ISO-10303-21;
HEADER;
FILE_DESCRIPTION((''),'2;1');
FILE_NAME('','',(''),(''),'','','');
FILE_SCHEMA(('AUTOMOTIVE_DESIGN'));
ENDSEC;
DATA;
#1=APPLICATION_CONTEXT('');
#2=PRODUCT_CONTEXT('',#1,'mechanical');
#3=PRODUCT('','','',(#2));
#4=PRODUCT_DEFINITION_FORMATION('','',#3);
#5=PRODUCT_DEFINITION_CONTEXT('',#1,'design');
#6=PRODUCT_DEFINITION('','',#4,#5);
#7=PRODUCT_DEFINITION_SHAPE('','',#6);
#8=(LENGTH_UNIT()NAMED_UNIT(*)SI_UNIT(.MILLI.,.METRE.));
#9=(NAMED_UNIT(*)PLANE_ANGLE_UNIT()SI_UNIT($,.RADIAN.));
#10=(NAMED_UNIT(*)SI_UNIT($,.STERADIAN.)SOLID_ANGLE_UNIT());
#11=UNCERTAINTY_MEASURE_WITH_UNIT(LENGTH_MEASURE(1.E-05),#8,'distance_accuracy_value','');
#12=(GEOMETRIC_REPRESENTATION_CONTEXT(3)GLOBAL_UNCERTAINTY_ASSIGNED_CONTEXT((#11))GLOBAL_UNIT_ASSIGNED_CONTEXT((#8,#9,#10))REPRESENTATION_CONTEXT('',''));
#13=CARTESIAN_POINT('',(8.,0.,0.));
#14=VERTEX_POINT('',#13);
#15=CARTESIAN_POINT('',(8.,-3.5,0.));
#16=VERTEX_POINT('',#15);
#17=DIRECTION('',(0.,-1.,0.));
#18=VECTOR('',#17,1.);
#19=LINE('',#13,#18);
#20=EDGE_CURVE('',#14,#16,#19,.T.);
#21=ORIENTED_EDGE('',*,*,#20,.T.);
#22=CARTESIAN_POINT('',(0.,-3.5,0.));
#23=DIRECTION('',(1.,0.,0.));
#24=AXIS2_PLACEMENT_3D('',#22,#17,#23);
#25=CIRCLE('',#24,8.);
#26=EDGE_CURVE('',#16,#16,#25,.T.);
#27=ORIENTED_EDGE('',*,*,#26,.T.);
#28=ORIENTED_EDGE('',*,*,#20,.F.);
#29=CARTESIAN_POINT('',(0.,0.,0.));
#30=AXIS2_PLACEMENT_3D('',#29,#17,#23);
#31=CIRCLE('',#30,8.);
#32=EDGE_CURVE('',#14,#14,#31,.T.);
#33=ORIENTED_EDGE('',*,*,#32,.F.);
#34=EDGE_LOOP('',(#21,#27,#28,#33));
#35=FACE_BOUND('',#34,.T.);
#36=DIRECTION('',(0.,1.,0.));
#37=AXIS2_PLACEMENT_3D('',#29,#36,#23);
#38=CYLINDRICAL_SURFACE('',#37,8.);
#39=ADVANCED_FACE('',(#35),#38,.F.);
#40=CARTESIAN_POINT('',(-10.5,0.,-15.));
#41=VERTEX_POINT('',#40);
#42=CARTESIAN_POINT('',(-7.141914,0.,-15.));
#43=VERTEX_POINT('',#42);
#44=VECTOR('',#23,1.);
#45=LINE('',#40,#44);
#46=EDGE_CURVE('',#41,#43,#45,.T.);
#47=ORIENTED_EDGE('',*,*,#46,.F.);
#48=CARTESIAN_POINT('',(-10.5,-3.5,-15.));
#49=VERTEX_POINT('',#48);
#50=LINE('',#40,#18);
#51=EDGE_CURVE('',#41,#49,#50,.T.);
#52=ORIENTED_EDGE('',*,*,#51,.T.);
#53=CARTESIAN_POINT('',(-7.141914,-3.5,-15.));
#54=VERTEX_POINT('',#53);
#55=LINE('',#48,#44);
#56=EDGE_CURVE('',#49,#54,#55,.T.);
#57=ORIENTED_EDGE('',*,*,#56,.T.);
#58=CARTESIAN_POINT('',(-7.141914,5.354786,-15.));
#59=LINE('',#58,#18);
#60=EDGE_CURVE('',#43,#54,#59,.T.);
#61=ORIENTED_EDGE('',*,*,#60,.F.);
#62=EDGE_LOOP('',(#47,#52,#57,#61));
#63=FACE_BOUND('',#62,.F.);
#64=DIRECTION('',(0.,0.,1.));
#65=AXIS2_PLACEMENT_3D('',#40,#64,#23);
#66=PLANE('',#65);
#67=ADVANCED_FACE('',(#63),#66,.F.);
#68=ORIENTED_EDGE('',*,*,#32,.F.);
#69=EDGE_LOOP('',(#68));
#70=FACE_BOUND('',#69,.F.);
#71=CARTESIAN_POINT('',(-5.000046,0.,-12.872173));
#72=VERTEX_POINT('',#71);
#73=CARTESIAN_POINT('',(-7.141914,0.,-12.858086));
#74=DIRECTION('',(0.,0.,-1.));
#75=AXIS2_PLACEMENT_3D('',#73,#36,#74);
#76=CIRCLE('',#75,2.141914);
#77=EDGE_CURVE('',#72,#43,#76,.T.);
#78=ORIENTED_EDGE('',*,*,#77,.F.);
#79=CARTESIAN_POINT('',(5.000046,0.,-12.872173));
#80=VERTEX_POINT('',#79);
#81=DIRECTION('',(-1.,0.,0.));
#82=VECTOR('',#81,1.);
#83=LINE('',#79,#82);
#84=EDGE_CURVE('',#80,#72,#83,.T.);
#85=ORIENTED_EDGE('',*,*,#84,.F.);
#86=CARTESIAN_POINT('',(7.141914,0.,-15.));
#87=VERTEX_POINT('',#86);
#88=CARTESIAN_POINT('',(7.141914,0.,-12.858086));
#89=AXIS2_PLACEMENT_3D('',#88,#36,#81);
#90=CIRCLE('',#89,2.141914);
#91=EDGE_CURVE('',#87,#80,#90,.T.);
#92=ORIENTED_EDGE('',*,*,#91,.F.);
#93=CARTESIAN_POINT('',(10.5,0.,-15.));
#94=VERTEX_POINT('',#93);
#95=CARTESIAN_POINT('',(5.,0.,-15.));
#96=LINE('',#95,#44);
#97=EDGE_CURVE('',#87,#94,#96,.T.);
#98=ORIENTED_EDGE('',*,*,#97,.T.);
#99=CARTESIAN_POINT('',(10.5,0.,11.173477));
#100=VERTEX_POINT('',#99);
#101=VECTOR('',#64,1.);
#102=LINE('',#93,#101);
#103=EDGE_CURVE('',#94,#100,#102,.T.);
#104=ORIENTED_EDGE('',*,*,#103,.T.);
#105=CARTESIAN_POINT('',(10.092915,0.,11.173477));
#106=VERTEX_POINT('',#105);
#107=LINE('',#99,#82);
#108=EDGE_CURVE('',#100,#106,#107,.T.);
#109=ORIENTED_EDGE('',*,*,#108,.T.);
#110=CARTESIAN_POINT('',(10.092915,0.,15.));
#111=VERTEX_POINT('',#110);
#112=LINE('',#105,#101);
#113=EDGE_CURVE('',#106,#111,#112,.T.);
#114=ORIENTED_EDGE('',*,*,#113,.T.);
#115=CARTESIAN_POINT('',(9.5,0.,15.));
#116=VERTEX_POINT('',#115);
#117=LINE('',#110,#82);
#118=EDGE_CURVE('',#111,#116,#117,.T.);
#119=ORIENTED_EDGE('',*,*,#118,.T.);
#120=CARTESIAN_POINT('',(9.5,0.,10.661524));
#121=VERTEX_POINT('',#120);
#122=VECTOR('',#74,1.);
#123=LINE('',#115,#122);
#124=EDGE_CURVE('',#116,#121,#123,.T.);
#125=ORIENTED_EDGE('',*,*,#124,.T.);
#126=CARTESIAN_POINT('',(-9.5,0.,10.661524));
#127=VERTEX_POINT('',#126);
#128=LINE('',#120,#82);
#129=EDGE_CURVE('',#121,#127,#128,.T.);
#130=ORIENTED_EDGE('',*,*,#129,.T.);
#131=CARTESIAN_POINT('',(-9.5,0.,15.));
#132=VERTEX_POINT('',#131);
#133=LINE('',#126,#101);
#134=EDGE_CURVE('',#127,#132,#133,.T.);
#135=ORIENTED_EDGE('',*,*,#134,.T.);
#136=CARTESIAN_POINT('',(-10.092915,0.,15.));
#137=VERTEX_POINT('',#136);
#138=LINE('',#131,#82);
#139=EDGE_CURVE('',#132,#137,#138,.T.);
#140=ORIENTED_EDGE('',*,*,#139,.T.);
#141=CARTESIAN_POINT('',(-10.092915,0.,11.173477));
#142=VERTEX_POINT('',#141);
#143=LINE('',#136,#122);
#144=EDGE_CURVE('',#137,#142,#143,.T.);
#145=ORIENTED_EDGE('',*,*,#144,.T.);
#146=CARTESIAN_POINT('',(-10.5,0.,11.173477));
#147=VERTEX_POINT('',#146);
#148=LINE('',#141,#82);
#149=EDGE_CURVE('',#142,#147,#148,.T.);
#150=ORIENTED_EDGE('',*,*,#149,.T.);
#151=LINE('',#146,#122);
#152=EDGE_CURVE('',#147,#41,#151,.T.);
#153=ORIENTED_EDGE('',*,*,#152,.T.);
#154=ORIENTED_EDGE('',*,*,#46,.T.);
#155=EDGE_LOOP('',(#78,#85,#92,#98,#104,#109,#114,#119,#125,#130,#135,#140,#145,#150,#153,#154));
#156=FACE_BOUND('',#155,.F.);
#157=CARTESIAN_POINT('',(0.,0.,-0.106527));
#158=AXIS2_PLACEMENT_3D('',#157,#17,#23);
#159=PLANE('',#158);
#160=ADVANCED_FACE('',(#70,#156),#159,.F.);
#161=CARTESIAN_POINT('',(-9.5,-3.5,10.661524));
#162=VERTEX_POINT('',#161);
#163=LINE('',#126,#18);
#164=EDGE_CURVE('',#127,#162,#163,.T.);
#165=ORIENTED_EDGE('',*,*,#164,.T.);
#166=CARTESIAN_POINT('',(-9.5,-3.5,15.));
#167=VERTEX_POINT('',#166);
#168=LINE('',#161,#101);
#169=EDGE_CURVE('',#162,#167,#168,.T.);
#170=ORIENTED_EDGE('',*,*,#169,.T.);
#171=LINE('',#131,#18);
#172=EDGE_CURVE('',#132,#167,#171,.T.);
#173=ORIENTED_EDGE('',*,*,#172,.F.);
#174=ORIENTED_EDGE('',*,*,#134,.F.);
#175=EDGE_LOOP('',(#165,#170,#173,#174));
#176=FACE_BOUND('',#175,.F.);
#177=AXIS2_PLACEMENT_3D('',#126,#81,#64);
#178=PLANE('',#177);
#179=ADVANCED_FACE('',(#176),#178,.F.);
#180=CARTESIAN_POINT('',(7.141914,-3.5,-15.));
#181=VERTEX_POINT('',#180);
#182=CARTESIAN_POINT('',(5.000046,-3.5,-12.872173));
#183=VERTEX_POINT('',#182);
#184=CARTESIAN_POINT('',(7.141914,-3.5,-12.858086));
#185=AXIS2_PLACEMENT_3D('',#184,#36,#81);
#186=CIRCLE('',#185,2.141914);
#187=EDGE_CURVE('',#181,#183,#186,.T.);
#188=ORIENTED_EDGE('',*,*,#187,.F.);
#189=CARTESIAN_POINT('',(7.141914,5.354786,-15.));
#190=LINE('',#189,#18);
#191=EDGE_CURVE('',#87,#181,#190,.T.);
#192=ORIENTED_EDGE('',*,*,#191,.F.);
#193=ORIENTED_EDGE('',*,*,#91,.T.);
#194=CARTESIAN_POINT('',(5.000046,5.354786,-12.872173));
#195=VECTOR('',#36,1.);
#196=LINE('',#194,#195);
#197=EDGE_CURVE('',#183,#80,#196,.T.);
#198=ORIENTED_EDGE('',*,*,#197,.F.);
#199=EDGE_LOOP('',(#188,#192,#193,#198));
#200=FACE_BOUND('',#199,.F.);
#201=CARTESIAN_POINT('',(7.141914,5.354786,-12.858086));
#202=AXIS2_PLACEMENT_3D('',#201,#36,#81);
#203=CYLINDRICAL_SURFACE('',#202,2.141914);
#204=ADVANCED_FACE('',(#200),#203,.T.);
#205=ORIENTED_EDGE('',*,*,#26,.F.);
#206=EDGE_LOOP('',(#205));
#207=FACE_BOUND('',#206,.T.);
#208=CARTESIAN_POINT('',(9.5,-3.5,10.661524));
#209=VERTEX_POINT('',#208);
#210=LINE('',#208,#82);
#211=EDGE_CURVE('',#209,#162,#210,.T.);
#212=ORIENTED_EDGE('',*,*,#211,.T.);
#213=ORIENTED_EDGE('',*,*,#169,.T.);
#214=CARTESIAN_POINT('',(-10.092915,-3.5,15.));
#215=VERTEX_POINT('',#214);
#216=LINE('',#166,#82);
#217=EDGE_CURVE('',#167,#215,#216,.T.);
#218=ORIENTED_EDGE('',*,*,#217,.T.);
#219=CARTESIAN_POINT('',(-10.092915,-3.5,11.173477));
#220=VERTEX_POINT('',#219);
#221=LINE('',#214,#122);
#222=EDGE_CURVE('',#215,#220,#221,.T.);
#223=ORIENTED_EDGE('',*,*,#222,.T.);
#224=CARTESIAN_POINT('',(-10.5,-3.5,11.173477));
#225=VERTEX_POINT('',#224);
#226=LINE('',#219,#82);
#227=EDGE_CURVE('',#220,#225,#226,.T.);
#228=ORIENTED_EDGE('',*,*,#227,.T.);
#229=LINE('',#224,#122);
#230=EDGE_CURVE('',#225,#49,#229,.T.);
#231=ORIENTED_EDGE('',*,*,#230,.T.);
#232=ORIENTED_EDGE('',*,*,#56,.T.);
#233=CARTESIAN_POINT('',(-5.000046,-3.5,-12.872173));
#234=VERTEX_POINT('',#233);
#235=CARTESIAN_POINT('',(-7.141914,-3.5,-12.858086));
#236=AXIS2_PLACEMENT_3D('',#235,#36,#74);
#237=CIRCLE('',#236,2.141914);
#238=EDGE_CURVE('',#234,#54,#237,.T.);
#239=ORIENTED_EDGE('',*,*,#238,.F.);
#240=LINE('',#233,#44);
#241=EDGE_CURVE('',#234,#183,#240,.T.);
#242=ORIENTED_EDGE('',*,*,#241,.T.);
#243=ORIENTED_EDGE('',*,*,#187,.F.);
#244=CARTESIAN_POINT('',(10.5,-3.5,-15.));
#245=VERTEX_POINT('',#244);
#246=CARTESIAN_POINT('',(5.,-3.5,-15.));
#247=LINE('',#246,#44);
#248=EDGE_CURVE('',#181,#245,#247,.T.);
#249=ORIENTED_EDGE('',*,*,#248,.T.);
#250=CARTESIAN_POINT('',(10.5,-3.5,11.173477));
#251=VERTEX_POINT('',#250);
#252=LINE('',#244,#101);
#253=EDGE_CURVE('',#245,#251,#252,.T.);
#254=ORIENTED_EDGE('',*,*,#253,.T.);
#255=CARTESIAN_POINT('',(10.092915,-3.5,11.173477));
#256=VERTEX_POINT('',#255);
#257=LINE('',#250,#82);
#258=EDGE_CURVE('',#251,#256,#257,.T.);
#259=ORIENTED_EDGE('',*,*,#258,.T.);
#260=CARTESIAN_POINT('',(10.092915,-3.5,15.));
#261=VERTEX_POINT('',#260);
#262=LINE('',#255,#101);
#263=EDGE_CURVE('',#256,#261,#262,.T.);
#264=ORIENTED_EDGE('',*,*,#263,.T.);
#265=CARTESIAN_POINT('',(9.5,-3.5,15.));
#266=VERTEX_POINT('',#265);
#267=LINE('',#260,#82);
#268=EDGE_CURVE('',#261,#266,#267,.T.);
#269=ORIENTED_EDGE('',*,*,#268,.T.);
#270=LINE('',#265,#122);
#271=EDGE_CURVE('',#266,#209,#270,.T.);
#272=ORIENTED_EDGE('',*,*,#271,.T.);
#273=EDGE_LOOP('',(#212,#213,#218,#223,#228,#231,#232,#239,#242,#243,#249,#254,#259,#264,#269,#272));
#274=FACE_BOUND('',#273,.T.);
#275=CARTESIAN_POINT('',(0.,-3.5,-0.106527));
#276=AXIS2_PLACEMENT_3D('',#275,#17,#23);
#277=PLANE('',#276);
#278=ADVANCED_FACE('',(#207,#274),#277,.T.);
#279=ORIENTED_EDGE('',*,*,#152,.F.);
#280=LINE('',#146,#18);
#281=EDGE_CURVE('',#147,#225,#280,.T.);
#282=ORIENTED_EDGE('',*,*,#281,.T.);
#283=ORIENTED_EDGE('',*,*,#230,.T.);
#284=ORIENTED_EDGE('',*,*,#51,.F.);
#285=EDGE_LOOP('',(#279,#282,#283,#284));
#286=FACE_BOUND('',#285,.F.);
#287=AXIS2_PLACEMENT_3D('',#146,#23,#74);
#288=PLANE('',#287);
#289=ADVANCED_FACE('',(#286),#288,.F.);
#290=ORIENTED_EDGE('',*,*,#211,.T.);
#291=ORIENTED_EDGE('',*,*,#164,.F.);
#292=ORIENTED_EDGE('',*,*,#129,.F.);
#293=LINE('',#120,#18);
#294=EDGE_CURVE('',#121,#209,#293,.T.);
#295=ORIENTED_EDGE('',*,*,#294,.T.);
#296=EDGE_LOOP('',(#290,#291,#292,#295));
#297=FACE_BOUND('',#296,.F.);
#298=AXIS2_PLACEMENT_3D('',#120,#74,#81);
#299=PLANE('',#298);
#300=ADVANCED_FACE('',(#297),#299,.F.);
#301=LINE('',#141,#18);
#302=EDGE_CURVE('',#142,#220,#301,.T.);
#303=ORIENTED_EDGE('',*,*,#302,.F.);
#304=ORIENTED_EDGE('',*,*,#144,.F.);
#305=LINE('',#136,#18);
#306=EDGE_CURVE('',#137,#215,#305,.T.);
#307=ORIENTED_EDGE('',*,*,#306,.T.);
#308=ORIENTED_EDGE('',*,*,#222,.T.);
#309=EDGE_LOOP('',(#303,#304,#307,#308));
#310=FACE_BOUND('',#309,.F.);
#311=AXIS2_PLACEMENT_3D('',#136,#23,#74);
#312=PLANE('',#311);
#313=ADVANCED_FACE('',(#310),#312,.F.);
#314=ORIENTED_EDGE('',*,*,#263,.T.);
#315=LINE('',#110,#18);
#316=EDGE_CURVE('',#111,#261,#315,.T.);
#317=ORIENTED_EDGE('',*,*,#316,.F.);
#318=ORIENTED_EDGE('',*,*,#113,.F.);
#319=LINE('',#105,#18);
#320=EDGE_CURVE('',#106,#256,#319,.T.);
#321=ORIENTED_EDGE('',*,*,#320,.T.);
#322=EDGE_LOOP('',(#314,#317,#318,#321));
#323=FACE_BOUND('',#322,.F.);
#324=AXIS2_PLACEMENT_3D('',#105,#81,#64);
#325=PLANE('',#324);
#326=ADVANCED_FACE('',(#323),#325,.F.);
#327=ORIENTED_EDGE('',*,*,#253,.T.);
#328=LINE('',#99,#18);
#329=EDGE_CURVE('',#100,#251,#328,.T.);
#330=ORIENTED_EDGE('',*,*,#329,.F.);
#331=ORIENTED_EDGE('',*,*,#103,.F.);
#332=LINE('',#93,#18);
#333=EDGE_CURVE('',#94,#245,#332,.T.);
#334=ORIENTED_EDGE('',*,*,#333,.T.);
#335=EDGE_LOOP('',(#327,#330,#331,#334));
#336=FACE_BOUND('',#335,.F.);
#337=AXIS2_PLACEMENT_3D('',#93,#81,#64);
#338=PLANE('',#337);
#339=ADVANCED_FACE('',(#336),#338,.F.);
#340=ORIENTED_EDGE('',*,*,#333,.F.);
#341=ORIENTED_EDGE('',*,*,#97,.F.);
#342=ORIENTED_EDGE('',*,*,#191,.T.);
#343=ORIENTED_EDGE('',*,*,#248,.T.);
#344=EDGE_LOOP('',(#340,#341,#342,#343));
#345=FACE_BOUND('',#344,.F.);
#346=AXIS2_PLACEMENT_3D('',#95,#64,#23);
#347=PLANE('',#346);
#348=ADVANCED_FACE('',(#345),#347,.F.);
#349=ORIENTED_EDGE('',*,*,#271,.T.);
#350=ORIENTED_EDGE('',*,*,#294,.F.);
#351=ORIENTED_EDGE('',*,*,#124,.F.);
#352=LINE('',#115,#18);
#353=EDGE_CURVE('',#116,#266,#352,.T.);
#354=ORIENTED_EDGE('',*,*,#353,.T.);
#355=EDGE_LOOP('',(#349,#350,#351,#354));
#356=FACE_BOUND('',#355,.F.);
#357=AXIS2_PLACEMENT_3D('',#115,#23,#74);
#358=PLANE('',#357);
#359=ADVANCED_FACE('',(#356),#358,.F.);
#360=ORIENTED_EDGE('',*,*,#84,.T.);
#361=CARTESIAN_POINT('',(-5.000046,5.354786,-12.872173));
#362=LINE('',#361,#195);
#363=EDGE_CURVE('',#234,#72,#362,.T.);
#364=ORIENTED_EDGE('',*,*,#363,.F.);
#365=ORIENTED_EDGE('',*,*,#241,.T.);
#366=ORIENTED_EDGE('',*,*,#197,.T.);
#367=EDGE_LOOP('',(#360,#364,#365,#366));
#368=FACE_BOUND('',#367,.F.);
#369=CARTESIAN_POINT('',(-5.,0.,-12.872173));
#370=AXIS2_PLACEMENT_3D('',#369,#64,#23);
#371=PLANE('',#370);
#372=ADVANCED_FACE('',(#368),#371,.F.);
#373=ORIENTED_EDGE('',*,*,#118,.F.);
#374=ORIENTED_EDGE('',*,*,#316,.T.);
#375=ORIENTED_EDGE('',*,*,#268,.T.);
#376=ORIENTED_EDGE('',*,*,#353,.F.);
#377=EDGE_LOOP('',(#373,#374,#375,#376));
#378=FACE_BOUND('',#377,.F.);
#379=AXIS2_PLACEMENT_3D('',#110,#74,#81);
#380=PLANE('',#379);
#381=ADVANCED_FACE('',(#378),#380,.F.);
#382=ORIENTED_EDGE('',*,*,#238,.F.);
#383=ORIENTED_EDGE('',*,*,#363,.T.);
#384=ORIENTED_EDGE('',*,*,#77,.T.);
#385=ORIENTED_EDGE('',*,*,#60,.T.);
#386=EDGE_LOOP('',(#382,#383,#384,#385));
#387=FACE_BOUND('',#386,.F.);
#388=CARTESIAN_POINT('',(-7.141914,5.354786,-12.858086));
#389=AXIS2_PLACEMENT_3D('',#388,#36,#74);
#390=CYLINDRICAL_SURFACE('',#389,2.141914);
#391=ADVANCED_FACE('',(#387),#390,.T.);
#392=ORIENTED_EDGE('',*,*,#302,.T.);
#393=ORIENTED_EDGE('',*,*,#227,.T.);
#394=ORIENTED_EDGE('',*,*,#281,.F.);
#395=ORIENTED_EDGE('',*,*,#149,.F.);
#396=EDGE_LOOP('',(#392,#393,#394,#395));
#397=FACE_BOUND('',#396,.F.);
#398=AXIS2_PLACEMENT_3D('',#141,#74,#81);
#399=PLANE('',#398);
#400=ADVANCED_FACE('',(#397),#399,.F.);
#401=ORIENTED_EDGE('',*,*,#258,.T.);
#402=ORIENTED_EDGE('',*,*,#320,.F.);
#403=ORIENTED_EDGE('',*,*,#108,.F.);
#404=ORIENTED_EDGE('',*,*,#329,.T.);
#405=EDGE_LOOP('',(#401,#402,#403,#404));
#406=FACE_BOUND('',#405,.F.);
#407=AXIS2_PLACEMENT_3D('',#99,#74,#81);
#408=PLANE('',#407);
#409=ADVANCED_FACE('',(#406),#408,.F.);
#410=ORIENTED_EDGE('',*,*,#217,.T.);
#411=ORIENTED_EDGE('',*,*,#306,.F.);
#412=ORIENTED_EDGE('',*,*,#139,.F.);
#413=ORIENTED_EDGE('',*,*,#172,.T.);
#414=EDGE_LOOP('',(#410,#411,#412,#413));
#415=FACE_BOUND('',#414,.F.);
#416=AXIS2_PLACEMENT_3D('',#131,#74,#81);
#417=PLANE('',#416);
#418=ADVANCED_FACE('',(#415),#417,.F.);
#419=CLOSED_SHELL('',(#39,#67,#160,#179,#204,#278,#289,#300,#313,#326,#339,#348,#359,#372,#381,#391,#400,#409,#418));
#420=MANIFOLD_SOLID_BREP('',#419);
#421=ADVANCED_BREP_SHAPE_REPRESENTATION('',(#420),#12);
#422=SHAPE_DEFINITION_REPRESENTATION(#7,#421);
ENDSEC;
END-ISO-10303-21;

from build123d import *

# Parameters (mm, degrees)
F0_R        = 8
F1_DEPTH    = 3.5
F2_T4_DEPTH = 14.2095720734
F2_T9_DEPTH = 14.2095720734


# Not quite as in the source:
# - a fillet or chamfer that OpenCascade refuses, or shapes differently, is made with other operations: its cross-section is extruded or revolved along the edge and cut away or added


with BuildPart() as f1:
    # F0 (on Front) → F1 (new body)
    with BuildSketch(Plane.XZ):
        Polygon((5, -15), (10.5, -15), (10.5, 11.1734773964), (10.0929150358, 11.1734773964), (10.0929150358, 15), (9.5, 15), (9.5, 10.6615237892), (-9.5, 10.6615237892), (-9.5, 15), (-10.0929150358, 15), (-10.0929150358, 11.1734773964), (-10.5, 11.1734773964), (-10.5, -15), (-5, -15), (-5, -12.8721727654), (5, -12.8721727654), align=None)
        Circle(F0_R, mode=Mode.SUBTRACT)
    extrude(amount=F1_DEPTH)

    # F2: fillet of radius 2.1419144147 on 2 edges, made by hand


with BuildPart() as f2_tool2:
    # F2_s3 → F2_t4 (new body)
    with BuildSketch(Plane.XZ.offset(-5.3547860367)):
        with BuildLine():
            ThreePointArc((-7.1419144147, -15), (-5.6273522073, -14.3726477927), (-5, -12.8580855853))
            Line((-5, -12.8580855853), (-5, -15))
            Line((-5, -15), (-7.1419144147, -15))
        make_face()
    extrude(amount=F2_T4_DEPTH)

    split(bisect_by=Plane.XY.offset(-12.8721727654), keep=Keep.BOTTOM)


with BuildPart() as f1_1:
    add(f1.part)

    # F2_t1: cut F2_tool2
    add(f2_tool2.part, mode=Mode.SUBTRACT)


with BuildPart() as f2_tool7:
    # F2_s8 → F2_t9 (new body)
    with BuildSketch(Plane.XZ.offset(-5.3547860367)):
        with BuildLine():
            ThreePointArc((5, -12.8580855853), (5.6273522073, -14.3726477927), (7.1419144147, -15))
            Line((7.1419144147, -15), (5, -15))
            Line((5, -15), (5, -12.8580855853))
        make_face()
    extrude(amount=F2_T9_DEPTH)

    split(bisect_by=Plane.XY.offset(-12.8721727654), keep=Keep.BOTTOM)


with BuildPart() as f1_2:
    add(f1_1.part)

    # F2_t6: cut F2_tool7
    add(f2_tool7.part, mode=Mode.SUBTRACT)


solid = f1_2.part
